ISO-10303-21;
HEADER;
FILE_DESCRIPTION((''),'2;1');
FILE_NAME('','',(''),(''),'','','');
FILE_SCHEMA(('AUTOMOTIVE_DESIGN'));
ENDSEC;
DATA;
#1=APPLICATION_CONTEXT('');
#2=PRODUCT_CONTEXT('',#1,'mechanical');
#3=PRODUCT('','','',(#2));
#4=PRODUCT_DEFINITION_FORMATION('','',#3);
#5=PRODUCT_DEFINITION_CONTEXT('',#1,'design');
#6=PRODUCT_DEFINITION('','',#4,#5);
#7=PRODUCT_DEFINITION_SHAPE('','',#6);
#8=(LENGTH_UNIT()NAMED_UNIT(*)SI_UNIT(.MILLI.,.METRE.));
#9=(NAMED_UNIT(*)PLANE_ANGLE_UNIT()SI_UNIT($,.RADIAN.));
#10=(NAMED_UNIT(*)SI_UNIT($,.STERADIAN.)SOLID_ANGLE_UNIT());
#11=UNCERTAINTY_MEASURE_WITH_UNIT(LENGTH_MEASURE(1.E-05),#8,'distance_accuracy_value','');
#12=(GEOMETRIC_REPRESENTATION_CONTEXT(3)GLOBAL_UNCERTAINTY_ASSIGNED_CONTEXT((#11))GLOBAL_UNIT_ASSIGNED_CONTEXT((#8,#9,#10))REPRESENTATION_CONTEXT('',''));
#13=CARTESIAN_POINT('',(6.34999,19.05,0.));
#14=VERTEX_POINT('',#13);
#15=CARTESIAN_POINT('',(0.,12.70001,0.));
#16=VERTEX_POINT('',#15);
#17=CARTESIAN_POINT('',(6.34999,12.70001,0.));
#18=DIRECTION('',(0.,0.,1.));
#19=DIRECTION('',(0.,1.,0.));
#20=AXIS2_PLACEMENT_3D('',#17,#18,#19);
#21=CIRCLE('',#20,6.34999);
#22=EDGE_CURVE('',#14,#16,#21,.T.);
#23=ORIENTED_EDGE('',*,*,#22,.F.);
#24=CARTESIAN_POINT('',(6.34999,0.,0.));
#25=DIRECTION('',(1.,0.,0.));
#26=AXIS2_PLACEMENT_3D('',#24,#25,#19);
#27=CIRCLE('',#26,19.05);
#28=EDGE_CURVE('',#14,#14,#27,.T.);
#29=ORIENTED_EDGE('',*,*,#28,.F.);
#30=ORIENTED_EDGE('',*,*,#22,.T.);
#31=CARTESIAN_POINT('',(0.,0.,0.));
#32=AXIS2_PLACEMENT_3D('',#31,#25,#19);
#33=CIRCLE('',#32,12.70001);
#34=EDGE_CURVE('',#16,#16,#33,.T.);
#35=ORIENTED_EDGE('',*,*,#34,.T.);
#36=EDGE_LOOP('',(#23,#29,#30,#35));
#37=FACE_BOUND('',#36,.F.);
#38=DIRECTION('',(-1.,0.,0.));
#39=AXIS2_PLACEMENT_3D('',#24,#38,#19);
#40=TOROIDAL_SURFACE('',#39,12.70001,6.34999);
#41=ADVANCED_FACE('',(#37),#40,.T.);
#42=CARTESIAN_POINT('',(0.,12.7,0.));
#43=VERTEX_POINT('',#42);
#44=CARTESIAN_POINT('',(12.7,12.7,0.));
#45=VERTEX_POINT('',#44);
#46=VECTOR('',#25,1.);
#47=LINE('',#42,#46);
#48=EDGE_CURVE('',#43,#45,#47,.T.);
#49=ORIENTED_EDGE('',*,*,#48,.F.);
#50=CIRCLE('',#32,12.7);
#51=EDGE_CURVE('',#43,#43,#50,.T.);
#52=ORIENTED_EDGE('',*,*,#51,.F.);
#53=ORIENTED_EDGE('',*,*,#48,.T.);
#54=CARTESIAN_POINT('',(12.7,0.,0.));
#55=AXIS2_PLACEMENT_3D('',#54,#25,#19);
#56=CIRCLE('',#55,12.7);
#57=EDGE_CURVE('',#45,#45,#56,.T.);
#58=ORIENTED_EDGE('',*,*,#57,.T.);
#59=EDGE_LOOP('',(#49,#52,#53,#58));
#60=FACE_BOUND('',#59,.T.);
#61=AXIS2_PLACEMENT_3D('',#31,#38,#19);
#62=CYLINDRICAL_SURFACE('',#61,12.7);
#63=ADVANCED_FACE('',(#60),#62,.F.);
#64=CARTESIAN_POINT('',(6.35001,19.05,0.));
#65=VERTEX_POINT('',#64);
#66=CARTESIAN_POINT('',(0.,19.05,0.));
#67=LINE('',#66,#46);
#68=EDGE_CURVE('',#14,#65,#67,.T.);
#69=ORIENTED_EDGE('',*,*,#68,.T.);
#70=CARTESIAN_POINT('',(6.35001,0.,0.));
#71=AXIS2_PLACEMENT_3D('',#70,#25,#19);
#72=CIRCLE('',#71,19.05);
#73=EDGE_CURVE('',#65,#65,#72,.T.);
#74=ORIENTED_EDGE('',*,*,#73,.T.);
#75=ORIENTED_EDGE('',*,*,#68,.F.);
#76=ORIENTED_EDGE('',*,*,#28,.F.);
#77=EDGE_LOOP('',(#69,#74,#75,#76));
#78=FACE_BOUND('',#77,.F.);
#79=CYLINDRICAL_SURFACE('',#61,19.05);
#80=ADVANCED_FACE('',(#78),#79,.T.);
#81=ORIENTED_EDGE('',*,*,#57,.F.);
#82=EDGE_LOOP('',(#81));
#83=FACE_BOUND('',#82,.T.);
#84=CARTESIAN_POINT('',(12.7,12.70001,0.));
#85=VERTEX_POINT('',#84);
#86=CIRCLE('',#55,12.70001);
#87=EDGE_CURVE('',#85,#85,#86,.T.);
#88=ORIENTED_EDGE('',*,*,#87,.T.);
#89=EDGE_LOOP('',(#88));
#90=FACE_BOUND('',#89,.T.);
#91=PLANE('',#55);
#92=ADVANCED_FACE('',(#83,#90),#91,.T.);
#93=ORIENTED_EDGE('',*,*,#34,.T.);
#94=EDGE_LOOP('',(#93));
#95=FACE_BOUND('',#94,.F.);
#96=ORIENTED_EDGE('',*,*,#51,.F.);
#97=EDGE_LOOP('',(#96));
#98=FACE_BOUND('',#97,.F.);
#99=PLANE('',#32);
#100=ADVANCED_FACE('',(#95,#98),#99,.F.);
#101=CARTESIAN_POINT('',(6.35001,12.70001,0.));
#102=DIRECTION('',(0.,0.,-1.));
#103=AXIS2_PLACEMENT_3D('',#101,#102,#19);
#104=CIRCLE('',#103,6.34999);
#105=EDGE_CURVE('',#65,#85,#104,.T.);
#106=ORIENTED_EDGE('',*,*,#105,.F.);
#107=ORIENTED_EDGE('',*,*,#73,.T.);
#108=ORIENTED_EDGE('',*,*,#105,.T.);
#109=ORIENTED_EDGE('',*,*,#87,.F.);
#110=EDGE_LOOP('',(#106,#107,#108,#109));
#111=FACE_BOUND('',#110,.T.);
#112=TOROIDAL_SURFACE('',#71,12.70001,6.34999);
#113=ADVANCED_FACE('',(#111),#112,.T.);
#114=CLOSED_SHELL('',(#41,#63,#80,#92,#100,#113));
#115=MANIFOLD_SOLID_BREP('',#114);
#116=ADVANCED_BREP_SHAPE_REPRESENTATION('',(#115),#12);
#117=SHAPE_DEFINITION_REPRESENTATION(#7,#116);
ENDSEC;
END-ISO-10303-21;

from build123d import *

# Parameters (mm, degrees)
F0_R     = 19.05
F0_R_2   = 12.7
F1_DEPTH = 12.7
F2_R     = 6.34999


# Not quite as in the source:
# - a fillet or chamfer is up to 0.001 mm smaller than in the source, because OpenCascade refuses the exact size


with BuildPart() as f1:
    # F0 (on Right) → F1 (new body)
    with BuildSketch(Plane.YZ):
        Circle(F0_R)
        Circle(F0_R_2, mode=Mode.SUBTRACT)
    extrude(amount=F1_DEPTH)

    # F2 (radius 6.35 in the source; OpenCascade refuses exactly that, so slightly less here)
    f2_edges = [f1.edges().sort_by_distance(p)[0] for p in [
        (12.7, -19.05, 0),
        (0, -19.05, 0),
    ]]
    fillet(f2_edges, radius=F2_R)


solid = f1.part
